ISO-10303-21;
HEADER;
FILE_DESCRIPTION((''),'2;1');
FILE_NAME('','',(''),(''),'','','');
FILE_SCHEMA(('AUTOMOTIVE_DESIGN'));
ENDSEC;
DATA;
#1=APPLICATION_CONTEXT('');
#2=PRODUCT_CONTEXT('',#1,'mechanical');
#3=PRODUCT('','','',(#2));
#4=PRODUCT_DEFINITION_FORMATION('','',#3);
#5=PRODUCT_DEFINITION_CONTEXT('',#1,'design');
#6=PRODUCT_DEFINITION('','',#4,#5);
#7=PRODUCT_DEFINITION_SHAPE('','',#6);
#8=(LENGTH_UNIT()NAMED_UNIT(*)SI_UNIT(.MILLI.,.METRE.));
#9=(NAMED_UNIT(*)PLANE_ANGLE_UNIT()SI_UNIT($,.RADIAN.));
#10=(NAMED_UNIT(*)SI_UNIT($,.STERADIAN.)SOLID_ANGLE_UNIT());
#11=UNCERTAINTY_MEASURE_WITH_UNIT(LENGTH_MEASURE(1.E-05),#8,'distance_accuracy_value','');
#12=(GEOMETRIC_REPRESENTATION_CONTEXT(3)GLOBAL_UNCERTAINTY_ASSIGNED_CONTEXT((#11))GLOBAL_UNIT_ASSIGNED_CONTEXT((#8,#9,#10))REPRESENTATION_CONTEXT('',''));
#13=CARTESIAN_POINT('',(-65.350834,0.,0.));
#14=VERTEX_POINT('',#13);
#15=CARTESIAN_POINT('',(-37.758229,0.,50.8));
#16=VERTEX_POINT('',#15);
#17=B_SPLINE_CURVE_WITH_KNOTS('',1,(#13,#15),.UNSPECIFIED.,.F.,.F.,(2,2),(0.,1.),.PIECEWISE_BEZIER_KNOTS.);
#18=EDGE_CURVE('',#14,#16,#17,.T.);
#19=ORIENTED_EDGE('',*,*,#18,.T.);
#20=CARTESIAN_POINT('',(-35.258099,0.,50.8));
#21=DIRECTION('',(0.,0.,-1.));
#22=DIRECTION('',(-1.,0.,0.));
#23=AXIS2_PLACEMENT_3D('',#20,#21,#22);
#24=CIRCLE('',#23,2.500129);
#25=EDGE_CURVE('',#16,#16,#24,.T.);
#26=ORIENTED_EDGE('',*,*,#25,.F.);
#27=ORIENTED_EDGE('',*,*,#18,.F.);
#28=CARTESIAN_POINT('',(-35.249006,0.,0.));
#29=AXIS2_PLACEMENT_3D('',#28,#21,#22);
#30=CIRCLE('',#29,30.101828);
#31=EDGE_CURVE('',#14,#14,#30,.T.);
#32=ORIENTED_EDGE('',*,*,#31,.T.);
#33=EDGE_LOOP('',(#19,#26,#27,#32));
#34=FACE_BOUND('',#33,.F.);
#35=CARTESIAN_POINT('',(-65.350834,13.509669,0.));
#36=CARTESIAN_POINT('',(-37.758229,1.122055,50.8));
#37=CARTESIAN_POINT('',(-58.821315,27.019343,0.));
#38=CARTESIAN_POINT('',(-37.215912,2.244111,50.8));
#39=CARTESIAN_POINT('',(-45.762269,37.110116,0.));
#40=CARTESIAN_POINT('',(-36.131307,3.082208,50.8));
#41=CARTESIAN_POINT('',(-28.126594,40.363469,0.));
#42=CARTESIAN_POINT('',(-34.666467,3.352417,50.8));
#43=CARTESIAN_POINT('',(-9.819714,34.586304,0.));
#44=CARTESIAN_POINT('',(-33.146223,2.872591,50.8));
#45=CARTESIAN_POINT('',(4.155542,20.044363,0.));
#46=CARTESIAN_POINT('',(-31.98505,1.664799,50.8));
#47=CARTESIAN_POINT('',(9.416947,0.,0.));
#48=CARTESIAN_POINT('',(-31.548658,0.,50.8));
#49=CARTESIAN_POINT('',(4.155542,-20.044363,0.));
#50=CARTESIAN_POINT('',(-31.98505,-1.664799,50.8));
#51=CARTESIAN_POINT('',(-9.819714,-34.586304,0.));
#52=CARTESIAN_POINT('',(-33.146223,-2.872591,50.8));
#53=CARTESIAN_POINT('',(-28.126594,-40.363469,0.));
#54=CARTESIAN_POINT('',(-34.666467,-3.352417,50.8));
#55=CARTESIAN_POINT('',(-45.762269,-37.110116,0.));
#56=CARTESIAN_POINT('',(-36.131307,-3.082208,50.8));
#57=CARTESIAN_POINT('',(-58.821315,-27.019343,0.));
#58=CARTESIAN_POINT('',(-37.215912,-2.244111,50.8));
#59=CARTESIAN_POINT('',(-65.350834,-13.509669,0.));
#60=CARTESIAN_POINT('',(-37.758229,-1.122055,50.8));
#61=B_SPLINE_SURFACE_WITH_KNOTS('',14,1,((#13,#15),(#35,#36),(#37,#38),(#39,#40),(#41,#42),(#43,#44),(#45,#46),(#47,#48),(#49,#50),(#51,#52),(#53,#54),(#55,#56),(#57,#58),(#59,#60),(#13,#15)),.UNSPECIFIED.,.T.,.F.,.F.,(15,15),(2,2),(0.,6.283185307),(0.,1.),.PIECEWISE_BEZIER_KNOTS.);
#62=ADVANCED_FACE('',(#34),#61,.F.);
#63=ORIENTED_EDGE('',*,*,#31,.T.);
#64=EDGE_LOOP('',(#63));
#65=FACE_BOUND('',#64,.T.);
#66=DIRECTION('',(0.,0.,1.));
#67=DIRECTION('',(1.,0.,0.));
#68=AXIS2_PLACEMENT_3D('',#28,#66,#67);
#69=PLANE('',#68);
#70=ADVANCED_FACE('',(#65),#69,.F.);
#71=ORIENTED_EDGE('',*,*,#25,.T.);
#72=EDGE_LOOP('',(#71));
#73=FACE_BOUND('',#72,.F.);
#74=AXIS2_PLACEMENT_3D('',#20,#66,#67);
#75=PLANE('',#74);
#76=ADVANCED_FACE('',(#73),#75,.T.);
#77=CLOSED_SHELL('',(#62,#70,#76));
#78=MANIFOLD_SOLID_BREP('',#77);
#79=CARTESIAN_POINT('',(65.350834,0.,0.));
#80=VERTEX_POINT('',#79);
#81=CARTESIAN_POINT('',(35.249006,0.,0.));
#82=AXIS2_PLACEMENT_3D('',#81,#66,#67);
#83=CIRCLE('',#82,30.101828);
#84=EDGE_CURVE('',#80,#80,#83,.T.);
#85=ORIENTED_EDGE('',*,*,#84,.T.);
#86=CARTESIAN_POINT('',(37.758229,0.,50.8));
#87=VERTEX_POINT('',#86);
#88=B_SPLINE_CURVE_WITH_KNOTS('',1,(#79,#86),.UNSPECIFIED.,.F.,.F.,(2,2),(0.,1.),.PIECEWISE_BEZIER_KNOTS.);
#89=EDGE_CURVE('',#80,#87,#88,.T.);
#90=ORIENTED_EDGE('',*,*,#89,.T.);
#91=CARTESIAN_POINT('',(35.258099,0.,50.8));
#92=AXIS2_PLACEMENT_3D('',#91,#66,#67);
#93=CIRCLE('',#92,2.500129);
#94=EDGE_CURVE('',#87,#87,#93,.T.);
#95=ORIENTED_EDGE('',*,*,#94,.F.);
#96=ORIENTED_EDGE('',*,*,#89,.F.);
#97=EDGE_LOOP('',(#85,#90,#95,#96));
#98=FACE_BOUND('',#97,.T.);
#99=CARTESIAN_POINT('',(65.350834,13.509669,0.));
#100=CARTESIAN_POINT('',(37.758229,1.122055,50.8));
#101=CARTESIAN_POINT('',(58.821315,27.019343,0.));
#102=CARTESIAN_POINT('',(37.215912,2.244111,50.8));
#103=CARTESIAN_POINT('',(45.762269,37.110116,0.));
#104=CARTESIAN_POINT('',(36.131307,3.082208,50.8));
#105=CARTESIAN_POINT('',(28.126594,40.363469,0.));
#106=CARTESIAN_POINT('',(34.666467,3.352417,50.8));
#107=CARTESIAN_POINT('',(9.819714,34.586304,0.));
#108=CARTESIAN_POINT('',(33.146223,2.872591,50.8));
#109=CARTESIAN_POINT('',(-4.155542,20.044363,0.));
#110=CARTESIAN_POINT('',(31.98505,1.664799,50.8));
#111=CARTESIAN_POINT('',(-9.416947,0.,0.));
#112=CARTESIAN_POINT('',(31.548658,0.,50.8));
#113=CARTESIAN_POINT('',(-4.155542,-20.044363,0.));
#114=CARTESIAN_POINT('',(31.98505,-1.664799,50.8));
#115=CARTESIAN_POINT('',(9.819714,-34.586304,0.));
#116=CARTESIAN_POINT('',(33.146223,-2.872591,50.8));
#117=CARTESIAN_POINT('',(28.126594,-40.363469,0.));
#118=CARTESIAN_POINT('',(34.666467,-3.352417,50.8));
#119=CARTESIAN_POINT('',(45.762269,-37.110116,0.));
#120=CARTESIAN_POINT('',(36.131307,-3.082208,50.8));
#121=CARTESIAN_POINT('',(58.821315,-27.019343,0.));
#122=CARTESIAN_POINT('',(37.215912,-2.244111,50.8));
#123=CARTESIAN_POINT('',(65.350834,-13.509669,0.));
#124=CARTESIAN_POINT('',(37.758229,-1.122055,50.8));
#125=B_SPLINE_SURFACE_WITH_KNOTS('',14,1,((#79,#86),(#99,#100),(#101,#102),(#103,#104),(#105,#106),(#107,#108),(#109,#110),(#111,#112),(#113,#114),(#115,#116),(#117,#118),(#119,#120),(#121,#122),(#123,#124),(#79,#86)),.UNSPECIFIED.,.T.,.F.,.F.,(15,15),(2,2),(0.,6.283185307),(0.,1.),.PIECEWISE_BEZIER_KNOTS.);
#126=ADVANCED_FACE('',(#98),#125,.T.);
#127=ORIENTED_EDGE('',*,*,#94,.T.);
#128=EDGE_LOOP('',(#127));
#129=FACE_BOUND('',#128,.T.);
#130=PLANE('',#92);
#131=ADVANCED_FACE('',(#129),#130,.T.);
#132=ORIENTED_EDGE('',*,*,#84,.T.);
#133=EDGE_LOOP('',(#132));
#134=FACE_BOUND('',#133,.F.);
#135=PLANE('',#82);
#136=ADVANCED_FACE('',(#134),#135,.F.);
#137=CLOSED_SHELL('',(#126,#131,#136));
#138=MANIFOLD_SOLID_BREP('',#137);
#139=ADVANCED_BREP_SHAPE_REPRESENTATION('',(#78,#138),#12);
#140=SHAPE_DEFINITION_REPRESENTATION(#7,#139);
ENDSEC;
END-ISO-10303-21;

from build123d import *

# Parameters (mm, degrees)
F0_R = 30.1018278724
F3_R = 2.5001293044


with BuildPart() as f4:
    # F0 (on Top) → F4 section 0
    with BuildSketch(Plane.XY):
        with Locations((35.2490060031, 0)):
            Circle(F0_R)
    # F3 (on offset) → F4 section 1
    with BuildSketch(Plane.XY.offset(50.8)):
        with Locations((35.2580994368, 0)):
            Circle(F3_R)
    loft()


with BuildPart() as f5_1:
    # F5: instance of F4
    add(f4.part.mirror(Plane.YZ))


solid = Compound([f4.part, f5_1.part])
